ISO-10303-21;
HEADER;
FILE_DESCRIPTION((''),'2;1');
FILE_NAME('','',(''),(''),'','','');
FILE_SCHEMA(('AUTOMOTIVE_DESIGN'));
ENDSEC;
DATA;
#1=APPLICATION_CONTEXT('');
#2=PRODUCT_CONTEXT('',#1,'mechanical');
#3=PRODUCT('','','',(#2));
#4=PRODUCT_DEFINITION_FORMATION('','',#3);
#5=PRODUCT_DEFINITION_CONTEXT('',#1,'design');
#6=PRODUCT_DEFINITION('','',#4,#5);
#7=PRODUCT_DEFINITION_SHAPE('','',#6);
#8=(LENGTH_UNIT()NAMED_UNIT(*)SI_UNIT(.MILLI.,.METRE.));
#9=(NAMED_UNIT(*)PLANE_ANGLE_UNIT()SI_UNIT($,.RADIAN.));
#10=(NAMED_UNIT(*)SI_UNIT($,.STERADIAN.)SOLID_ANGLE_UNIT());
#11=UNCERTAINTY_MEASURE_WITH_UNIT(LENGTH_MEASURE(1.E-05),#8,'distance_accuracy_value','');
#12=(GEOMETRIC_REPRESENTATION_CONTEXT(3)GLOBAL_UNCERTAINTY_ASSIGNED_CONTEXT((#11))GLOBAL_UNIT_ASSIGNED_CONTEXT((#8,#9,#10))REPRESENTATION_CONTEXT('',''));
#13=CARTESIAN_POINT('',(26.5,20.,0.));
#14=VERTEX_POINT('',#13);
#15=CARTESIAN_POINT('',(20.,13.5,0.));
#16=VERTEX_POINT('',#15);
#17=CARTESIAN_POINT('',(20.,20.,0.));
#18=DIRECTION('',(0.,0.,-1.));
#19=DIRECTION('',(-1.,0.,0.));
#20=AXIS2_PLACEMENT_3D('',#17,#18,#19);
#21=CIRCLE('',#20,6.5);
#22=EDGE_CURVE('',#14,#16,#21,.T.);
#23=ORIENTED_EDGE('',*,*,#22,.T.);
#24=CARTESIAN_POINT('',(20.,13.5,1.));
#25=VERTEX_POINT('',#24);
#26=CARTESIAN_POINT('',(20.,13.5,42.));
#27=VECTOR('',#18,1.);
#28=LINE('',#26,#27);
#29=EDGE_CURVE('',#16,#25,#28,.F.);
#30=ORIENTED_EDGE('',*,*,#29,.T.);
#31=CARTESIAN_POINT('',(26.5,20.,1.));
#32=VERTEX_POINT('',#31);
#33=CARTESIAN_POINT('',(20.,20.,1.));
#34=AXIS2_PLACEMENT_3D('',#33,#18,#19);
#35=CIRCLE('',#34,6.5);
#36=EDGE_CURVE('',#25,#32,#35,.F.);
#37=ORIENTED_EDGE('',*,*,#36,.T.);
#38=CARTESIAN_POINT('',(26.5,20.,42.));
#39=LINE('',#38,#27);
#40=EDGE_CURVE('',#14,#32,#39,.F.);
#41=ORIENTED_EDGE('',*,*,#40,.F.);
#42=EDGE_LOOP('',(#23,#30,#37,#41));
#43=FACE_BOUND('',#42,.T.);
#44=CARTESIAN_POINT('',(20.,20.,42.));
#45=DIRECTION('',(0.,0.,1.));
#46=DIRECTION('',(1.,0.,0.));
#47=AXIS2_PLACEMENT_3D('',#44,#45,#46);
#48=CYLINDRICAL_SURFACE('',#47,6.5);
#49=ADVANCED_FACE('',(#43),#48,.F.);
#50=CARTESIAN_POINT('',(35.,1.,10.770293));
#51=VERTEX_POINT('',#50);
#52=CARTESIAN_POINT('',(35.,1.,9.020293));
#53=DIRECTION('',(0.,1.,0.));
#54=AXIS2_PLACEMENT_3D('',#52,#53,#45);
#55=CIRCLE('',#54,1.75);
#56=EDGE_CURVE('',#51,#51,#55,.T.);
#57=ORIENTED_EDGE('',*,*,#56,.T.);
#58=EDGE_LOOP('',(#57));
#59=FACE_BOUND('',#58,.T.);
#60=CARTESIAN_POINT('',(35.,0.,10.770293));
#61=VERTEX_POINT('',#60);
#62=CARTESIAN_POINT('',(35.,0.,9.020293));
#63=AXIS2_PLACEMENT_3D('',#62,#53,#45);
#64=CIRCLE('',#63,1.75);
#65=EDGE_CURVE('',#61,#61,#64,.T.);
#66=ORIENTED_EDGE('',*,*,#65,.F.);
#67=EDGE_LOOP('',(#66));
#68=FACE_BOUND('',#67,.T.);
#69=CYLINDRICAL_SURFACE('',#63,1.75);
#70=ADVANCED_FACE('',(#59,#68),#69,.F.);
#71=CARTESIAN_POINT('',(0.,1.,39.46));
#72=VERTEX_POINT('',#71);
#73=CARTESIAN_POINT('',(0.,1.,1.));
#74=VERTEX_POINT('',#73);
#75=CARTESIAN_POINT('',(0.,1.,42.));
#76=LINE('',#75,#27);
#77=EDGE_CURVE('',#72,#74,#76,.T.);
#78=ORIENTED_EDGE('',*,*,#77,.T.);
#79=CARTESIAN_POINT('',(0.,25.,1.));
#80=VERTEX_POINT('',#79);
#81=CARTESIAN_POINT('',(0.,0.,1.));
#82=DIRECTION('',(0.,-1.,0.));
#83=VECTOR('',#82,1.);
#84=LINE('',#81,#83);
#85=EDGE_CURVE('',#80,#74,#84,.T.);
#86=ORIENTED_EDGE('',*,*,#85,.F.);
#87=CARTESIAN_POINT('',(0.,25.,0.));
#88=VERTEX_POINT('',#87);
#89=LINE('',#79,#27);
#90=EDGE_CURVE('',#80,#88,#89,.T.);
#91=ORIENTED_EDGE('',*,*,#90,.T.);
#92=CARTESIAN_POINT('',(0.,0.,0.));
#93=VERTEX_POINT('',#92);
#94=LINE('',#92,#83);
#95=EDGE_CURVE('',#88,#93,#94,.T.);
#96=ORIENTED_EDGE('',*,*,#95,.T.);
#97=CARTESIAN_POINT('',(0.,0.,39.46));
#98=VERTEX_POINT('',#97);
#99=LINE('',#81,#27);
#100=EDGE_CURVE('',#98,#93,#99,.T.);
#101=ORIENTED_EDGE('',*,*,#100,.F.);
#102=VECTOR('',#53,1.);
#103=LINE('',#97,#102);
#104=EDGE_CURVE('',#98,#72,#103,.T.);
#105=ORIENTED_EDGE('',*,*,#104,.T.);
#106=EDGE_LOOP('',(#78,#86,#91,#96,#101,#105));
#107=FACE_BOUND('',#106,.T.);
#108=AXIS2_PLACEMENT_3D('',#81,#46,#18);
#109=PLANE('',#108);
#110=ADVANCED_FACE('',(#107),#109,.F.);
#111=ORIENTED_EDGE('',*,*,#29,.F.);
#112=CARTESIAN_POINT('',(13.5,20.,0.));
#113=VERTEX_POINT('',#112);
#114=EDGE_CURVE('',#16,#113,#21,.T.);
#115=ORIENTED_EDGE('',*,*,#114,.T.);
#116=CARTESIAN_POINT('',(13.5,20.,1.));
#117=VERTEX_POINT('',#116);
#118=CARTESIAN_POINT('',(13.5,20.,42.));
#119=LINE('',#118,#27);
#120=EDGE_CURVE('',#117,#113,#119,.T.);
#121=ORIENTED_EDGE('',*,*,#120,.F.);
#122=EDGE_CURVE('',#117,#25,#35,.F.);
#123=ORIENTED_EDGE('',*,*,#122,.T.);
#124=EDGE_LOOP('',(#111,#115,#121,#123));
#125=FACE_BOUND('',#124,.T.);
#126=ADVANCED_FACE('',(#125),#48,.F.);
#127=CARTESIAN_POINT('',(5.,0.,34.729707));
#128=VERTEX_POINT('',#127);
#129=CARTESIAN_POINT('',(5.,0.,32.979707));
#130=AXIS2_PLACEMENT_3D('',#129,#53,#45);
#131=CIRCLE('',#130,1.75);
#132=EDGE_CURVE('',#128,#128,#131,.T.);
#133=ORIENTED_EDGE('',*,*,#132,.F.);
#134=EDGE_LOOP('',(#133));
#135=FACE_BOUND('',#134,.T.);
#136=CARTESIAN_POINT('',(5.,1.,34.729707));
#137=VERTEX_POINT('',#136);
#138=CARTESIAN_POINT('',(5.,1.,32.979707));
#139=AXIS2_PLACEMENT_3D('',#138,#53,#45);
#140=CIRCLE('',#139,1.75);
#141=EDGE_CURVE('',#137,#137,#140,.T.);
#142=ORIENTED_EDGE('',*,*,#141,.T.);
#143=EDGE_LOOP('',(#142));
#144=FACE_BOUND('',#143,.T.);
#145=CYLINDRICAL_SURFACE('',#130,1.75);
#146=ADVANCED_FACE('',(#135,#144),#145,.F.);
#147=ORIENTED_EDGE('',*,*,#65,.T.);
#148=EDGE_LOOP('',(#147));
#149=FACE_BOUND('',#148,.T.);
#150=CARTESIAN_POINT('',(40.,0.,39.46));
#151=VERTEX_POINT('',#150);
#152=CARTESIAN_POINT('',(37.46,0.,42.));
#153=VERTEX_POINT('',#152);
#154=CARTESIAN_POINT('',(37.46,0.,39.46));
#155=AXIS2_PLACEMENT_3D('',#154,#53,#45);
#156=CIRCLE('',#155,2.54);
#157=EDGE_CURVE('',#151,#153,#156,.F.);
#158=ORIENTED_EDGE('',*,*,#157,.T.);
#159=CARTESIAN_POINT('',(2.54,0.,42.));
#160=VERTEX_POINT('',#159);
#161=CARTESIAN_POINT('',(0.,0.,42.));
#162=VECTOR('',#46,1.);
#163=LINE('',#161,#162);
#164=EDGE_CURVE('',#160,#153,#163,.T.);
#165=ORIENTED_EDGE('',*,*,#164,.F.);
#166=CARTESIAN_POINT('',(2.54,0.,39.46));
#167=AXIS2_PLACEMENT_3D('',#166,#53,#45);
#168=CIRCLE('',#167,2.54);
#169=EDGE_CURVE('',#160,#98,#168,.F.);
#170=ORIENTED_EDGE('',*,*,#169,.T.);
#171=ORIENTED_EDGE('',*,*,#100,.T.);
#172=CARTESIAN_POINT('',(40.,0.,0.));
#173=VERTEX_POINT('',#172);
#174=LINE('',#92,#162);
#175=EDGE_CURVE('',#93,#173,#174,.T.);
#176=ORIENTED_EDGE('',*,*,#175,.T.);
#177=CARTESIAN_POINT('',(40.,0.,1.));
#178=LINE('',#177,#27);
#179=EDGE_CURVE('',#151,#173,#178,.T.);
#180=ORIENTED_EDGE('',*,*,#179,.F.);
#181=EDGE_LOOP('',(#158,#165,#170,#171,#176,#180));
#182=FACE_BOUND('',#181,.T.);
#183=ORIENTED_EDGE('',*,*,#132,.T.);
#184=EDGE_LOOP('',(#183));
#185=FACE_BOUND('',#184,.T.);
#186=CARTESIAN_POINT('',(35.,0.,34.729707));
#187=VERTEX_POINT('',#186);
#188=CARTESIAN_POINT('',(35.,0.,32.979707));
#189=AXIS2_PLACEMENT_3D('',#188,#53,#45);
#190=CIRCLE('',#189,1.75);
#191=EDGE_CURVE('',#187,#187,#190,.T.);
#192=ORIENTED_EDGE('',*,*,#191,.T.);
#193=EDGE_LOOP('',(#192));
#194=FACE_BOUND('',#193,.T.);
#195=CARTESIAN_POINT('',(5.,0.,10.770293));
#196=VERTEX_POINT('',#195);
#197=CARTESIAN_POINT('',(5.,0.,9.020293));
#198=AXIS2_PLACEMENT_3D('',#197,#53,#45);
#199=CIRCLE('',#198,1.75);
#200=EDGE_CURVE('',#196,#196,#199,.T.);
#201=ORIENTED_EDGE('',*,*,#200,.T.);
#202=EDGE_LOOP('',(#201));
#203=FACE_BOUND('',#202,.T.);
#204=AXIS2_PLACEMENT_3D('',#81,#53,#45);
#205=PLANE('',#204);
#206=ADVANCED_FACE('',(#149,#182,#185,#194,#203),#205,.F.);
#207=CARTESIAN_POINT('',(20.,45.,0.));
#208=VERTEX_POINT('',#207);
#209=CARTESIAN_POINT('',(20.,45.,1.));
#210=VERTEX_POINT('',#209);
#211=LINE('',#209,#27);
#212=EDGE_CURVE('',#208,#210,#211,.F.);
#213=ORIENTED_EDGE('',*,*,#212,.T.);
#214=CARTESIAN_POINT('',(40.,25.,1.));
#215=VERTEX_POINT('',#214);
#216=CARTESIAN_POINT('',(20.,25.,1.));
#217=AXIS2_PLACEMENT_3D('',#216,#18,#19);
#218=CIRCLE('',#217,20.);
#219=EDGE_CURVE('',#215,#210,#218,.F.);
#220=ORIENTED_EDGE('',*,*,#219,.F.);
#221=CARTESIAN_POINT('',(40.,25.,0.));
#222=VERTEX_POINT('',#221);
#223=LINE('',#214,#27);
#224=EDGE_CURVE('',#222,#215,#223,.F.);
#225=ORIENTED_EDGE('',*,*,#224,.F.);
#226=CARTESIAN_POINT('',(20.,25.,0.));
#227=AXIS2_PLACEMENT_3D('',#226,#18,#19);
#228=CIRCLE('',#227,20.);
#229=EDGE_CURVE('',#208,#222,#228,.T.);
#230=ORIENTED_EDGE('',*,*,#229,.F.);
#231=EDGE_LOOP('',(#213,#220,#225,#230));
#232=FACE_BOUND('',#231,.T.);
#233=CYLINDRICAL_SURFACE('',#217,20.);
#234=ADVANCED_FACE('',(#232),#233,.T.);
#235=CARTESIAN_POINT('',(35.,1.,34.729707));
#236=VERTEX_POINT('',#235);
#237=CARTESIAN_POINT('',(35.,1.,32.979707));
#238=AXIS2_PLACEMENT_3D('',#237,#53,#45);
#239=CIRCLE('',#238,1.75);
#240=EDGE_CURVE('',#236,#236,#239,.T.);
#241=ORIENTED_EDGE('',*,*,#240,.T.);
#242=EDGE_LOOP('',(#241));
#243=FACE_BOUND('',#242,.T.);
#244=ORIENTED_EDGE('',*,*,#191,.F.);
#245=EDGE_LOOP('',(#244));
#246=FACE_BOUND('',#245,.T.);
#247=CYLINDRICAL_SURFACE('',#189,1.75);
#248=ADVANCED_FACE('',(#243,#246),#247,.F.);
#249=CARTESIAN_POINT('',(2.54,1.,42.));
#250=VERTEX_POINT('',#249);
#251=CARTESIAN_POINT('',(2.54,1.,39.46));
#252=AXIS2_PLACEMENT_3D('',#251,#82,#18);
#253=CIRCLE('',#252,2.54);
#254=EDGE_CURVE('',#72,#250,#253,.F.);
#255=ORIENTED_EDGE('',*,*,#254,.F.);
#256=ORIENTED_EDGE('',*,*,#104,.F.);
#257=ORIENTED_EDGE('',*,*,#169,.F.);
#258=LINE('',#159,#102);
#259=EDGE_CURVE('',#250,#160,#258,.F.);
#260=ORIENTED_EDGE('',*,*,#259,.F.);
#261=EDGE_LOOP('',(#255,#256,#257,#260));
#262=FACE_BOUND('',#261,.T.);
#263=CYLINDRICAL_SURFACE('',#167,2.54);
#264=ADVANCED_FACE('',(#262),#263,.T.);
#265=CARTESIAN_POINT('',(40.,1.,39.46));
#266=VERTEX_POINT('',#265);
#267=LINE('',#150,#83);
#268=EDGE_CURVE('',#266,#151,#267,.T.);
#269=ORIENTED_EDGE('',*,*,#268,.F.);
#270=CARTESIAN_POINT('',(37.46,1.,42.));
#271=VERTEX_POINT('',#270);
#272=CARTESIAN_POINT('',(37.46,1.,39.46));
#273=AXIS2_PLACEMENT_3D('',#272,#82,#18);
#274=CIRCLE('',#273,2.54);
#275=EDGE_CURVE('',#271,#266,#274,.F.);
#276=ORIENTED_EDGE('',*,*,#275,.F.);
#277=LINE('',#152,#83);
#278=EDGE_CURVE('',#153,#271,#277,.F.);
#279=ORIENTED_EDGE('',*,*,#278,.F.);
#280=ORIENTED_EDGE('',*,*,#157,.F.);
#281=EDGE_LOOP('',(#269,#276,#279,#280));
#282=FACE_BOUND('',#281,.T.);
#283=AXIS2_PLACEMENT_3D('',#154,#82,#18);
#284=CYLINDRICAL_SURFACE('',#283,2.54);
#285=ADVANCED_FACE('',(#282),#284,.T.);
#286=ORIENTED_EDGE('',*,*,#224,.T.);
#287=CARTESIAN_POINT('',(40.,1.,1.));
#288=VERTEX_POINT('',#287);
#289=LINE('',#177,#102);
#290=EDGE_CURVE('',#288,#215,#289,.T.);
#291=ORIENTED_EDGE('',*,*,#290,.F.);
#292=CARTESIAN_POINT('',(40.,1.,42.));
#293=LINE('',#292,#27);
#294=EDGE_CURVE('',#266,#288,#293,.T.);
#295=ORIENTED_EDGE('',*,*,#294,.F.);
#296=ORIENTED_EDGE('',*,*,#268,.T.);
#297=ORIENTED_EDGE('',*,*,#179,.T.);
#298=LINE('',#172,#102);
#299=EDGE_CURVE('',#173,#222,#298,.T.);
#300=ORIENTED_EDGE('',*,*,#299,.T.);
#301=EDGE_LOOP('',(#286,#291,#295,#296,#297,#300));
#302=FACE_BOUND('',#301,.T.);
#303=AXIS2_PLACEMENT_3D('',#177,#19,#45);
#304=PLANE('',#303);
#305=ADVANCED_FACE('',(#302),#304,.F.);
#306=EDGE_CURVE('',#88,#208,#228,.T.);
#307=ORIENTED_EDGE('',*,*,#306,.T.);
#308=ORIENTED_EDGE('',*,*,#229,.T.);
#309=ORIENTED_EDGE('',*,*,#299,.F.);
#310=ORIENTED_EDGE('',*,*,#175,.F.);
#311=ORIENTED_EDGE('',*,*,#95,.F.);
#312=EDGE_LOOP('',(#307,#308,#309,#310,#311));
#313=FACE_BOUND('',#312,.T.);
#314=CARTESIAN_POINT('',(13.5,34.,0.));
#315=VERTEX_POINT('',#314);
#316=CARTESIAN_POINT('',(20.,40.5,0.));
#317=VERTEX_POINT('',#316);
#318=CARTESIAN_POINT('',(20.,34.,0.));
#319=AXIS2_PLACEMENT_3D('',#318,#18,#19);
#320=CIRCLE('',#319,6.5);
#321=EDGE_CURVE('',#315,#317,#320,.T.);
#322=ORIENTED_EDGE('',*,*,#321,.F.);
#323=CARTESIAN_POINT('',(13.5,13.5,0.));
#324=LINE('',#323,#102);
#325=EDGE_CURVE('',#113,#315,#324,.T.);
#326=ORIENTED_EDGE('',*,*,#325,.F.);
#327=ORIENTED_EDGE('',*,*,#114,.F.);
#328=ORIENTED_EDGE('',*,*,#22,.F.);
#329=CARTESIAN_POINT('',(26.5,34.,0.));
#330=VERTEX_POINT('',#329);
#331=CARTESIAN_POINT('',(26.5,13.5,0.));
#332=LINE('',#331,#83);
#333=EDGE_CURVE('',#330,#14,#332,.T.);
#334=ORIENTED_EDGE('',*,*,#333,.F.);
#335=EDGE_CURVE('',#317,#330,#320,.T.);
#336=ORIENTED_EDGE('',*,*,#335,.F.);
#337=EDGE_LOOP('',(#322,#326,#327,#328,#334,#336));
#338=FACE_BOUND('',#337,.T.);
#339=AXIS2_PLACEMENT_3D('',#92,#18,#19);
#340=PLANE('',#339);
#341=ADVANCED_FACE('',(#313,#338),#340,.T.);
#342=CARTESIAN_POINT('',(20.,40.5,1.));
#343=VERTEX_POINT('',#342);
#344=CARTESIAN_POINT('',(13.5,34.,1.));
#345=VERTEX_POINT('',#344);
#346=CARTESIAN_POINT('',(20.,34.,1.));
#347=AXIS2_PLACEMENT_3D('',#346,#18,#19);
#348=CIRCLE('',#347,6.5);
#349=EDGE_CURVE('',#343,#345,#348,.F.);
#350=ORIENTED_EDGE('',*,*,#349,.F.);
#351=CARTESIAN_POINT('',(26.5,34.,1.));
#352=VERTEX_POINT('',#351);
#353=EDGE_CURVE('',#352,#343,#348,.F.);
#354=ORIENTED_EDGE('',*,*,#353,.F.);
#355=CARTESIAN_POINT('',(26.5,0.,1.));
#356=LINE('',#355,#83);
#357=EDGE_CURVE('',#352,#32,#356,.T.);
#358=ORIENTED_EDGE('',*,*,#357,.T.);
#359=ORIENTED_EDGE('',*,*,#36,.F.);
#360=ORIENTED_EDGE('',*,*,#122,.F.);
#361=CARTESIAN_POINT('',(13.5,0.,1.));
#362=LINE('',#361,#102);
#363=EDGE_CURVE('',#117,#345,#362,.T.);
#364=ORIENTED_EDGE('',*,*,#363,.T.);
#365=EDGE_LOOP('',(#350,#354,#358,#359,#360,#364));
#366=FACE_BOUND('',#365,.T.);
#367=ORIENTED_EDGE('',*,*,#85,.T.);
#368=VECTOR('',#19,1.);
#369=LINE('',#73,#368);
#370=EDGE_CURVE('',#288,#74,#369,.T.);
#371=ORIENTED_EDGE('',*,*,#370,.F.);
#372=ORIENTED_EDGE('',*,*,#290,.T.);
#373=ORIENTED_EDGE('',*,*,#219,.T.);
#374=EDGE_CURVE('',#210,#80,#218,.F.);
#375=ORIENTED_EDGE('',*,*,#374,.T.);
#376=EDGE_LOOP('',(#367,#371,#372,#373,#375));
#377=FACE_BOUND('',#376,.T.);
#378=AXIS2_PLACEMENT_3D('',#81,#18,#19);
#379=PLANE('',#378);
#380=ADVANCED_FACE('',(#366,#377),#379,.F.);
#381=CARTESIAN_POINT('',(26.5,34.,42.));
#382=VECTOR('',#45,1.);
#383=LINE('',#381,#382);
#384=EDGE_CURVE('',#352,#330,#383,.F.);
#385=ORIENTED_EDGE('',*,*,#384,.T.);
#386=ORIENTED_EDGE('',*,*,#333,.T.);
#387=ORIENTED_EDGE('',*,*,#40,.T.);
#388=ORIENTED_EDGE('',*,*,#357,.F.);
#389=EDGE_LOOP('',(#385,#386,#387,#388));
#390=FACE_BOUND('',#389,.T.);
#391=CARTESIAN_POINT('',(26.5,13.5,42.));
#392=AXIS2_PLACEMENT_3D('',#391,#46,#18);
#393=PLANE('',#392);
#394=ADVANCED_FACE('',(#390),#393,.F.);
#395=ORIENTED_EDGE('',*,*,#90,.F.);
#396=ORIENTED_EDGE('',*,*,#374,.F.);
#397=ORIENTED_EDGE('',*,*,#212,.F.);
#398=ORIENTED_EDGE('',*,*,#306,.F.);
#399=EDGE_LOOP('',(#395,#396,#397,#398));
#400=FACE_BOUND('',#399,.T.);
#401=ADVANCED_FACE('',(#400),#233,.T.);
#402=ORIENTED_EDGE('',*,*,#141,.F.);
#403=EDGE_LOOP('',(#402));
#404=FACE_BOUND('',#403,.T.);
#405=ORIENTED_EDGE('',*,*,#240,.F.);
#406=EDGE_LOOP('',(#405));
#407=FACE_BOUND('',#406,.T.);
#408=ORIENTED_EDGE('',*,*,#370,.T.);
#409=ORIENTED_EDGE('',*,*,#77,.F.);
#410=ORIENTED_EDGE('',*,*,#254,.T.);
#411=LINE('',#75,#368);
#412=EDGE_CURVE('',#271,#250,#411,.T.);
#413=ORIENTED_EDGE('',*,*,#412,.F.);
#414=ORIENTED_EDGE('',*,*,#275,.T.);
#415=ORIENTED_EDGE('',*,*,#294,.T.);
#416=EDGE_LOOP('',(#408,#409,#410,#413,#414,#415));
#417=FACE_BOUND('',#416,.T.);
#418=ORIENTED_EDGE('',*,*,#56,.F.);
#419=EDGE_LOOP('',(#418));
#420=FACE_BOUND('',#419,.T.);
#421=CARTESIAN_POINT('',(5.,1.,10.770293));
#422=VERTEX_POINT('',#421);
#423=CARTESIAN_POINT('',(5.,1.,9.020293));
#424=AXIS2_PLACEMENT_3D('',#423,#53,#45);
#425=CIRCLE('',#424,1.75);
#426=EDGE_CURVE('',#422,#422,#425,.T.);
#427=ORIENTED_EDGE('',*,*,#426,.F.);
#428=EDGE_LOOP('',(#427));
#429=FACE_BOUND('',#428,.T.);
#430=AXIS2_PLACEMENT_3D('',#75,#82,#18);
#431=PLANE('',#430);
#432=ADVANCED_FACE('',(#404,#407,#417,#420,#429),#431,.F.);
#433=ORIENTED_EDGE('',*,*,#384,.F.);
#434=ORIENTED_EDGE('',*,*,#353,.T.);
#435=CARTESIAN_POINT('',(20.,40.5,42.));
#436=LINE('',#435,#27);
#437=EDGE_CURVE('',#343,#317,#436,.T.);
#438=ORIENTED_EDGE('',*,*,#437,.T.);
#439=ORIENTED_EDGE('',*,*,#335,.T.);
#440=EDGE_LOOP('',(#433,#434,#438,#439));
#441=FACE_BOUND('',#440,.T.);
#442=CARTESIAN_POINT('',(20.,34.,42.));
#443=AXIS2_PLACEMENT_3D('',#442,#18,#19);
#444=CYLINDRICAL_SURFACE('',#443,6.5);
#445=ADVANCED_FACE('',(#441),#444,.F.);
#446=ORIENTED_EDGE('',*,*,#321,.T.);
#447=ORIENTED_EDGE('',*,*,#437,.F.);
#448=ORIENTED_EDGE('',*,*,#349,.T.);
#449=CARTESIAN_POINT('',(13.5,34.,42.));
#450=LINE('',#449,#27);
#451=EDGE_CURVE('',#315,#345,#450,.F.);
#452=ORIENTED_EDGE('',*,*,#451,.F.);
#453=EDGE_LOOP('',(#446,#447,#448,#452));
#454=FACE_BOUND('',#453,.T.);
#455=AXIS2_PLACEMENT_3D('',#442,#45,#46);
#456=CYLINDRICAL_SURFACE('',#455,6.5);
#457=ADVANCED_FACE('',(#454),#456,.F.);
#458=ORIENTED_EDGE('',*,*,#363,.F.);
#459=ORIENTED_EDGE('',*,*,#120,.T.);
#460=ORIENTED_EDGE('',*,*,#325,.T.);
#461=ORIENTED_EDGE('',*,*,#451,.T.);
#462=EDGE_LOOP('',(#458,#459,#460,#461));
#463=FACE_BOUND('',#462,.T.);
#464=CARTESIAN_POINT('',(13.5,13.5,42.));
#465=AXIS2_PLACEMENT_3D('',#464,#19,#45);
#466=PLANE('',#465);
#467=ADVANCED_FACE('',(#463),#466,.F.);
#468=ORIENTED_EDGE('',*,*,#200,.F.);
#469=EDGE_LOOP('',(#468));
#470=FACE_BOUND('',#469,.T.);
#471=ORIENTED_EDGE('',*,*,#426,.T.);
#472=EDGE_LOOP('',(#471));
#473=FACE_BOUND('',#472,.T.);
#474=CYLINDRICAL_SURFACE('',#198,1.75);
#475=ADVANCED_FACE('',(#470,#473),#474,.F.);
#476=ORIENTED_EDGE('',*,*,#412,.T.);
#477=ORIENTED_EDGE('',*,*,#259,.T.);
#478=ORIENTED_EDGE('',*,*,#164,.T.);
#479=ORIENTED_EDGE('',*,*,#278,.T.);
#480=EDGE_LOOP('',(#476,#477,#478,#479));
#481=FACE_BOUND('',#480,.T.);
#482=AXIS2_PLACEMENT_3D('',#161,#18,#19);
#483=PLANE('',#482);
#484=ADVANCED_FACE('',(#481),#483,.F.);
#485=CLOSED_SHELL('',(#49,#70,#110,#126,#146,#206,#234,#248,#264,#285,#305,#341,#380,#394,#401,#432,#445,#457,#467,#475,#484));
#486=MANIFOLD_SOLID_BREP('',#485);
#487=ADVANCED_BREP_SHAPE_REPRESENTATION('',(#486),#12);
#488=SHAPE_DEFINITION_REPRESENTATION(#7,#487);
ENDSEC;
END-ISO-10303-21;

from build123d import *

# Parameters (mm, degrees)
SKETCH1_W             = 40
SKETCH1_H             = 44.999999916
VERTICAL_BASE_DEPTH   = 1
TOP_ROUNDING_R        = 20
TOP_ROUNDING_2_R      = 20
SKETCH2_W             = 40
SKETCH2_H             = 1
HORIZONTAL_BASE_DEPTH = 41
FILLET3_R             = 2.54
FILLET4_R             = 2.54
SKETCH3_R             = 1.75
MOUNTING_HOLES_DEPTH  = 73.801098842
SKETCH5_W             = 13
SKETCH5_H             = 27
CUT_EXTRUDE2_DEPTH    = 74.409808557
FILLET5_R             = 6.5
FILLET6_R             = 6.5
FILLET7_R             = 6.5
FILLET8_R             = 6.5


with BuildPart() as part:
    # Sketch1 → Vertical-Base (new body)
    with BuildSketch(Plane.XY):
        with Locations((20, 22.499999958)):
            Rectangle(SKETCH1_W, SKETCH1_H)
    extrude(amount=VERTICAL_BASE_DEPTH)

    # Top-Rounding
    top_rounding_edges = [part.edges().sort_by_distance(p)[0] for p in [
        (0, 44.999999916, 0.5),
    ]]
    fillet(top_rounding_edges, radius=TOP_ROUNDING_R)

    # Top-Rounding-2
    top_rounding_2_edges = [part.edges().sort_by_distance(p)[0] for p in [
        (40, 44.999999916, 0.5),
    ]]
    fillet(top_rounding_2_edges, radius=TOP_ROUNDING_2_R - 0.0001)  # a hair under: the kernel refuses the full size

    # Sketch2 → Horizontal-Base (add)
    with BuildSketch(Plane.XY.offset(1)):
        with Locations((20, 0.5)):
            Rectangle(SKETCH2_W, SKETCH2_H)
    extrude(amount=HORIZONTAL_BASE_DEPTH)

    # Fillet3
    fillet3_edges = [part.edges().sort_by_distance(p)[0] for p in [
        (40, 0.5, 42),
    ]]
    fillet(fillet3_edges, radius=FILLET3_R)

    # Fillet4
    fillet4_edges = [part.edges().sort_by_distance(p)[0] for p in [
        (0, 0.5, 42),
    ]]
    fillet(fillet4_edges, radius=FILLET4_R)

    # Sketch3 → Mounting Holes (cut, through all)
    with BuildSketch(Plane(origin=(0, 1, 0), x_dir=(1, 0, 0), z_dir=(0, 1, 0))):
        with Locations(Location((35, -32.979707006, 0), (0, 0, 270))):
            Circle(SKETCH3_R)
        with Locations(Location((5, -32.979707006, 0), (0, 0, 270))):
            Circle(SKETCH3_R)
        with Locations(Location((5, -9.020292994, 0), (0, 0, 270))):
            Circle(SKETCH3_R)
        with Locations(Location((35, -9.020292994, 0), (0, 0, 270))):
            Circle(SKETCH3_R)
    extrude(amount=-MOUNTING_HOLES_DEPTH, mode=Mode.SUBTRACT)

    # Sketch5 → Cut-Extrude2 (cut, through all)
    with BuildSketch(Plane(origin=(0, 0, 0), x_dir=(-1, 0, 0), z_dir=(0, 0, -1))):
        with Locations((-20, 27)):
            Rectangle(SKETCH5_W, SKETCH5_H)
    extrude(amount=-CUT_EXTRUDE2_DEPTH, mode=Mode.SUBTRACT)

    # Fillet5
    fillet5_edges = [part.edges().sort_by_distance(p)[0] for p in [
        (13.5, 40.5, 0.5),
    ]]
    fillet(fillet5_edges, radius=FILLET5_R)

    # Fillet6
    fillet6_edges = [part.edges().sort_by_distance(p)[0] for p in [
        (26.5, 40.5, 0.5),
    ]]
    fillet(fillet6_edges, radius=FILLET6_R - 0.0001)  # a hair under: the kernel refuses the full size

    # Fillet7
    fillet7_edges = [part.edges().sort_by_distance(p)[0] for p in [
        (13.5, 13.5, 0.5),
    ]]
    fillet(fillet7_edges, radius=FILLET7_R)

    # Fillet8
    fillet8_edges = [part.edges().sort_by_distance(p)[0] for p in [
        (26.5, 13.5, 0.5),
    ]]
    fillet(fillet8_edges, radius=FILLET8_R - 0.0001)  # a hair under: the kernel refuses the full size


solid = part.part
